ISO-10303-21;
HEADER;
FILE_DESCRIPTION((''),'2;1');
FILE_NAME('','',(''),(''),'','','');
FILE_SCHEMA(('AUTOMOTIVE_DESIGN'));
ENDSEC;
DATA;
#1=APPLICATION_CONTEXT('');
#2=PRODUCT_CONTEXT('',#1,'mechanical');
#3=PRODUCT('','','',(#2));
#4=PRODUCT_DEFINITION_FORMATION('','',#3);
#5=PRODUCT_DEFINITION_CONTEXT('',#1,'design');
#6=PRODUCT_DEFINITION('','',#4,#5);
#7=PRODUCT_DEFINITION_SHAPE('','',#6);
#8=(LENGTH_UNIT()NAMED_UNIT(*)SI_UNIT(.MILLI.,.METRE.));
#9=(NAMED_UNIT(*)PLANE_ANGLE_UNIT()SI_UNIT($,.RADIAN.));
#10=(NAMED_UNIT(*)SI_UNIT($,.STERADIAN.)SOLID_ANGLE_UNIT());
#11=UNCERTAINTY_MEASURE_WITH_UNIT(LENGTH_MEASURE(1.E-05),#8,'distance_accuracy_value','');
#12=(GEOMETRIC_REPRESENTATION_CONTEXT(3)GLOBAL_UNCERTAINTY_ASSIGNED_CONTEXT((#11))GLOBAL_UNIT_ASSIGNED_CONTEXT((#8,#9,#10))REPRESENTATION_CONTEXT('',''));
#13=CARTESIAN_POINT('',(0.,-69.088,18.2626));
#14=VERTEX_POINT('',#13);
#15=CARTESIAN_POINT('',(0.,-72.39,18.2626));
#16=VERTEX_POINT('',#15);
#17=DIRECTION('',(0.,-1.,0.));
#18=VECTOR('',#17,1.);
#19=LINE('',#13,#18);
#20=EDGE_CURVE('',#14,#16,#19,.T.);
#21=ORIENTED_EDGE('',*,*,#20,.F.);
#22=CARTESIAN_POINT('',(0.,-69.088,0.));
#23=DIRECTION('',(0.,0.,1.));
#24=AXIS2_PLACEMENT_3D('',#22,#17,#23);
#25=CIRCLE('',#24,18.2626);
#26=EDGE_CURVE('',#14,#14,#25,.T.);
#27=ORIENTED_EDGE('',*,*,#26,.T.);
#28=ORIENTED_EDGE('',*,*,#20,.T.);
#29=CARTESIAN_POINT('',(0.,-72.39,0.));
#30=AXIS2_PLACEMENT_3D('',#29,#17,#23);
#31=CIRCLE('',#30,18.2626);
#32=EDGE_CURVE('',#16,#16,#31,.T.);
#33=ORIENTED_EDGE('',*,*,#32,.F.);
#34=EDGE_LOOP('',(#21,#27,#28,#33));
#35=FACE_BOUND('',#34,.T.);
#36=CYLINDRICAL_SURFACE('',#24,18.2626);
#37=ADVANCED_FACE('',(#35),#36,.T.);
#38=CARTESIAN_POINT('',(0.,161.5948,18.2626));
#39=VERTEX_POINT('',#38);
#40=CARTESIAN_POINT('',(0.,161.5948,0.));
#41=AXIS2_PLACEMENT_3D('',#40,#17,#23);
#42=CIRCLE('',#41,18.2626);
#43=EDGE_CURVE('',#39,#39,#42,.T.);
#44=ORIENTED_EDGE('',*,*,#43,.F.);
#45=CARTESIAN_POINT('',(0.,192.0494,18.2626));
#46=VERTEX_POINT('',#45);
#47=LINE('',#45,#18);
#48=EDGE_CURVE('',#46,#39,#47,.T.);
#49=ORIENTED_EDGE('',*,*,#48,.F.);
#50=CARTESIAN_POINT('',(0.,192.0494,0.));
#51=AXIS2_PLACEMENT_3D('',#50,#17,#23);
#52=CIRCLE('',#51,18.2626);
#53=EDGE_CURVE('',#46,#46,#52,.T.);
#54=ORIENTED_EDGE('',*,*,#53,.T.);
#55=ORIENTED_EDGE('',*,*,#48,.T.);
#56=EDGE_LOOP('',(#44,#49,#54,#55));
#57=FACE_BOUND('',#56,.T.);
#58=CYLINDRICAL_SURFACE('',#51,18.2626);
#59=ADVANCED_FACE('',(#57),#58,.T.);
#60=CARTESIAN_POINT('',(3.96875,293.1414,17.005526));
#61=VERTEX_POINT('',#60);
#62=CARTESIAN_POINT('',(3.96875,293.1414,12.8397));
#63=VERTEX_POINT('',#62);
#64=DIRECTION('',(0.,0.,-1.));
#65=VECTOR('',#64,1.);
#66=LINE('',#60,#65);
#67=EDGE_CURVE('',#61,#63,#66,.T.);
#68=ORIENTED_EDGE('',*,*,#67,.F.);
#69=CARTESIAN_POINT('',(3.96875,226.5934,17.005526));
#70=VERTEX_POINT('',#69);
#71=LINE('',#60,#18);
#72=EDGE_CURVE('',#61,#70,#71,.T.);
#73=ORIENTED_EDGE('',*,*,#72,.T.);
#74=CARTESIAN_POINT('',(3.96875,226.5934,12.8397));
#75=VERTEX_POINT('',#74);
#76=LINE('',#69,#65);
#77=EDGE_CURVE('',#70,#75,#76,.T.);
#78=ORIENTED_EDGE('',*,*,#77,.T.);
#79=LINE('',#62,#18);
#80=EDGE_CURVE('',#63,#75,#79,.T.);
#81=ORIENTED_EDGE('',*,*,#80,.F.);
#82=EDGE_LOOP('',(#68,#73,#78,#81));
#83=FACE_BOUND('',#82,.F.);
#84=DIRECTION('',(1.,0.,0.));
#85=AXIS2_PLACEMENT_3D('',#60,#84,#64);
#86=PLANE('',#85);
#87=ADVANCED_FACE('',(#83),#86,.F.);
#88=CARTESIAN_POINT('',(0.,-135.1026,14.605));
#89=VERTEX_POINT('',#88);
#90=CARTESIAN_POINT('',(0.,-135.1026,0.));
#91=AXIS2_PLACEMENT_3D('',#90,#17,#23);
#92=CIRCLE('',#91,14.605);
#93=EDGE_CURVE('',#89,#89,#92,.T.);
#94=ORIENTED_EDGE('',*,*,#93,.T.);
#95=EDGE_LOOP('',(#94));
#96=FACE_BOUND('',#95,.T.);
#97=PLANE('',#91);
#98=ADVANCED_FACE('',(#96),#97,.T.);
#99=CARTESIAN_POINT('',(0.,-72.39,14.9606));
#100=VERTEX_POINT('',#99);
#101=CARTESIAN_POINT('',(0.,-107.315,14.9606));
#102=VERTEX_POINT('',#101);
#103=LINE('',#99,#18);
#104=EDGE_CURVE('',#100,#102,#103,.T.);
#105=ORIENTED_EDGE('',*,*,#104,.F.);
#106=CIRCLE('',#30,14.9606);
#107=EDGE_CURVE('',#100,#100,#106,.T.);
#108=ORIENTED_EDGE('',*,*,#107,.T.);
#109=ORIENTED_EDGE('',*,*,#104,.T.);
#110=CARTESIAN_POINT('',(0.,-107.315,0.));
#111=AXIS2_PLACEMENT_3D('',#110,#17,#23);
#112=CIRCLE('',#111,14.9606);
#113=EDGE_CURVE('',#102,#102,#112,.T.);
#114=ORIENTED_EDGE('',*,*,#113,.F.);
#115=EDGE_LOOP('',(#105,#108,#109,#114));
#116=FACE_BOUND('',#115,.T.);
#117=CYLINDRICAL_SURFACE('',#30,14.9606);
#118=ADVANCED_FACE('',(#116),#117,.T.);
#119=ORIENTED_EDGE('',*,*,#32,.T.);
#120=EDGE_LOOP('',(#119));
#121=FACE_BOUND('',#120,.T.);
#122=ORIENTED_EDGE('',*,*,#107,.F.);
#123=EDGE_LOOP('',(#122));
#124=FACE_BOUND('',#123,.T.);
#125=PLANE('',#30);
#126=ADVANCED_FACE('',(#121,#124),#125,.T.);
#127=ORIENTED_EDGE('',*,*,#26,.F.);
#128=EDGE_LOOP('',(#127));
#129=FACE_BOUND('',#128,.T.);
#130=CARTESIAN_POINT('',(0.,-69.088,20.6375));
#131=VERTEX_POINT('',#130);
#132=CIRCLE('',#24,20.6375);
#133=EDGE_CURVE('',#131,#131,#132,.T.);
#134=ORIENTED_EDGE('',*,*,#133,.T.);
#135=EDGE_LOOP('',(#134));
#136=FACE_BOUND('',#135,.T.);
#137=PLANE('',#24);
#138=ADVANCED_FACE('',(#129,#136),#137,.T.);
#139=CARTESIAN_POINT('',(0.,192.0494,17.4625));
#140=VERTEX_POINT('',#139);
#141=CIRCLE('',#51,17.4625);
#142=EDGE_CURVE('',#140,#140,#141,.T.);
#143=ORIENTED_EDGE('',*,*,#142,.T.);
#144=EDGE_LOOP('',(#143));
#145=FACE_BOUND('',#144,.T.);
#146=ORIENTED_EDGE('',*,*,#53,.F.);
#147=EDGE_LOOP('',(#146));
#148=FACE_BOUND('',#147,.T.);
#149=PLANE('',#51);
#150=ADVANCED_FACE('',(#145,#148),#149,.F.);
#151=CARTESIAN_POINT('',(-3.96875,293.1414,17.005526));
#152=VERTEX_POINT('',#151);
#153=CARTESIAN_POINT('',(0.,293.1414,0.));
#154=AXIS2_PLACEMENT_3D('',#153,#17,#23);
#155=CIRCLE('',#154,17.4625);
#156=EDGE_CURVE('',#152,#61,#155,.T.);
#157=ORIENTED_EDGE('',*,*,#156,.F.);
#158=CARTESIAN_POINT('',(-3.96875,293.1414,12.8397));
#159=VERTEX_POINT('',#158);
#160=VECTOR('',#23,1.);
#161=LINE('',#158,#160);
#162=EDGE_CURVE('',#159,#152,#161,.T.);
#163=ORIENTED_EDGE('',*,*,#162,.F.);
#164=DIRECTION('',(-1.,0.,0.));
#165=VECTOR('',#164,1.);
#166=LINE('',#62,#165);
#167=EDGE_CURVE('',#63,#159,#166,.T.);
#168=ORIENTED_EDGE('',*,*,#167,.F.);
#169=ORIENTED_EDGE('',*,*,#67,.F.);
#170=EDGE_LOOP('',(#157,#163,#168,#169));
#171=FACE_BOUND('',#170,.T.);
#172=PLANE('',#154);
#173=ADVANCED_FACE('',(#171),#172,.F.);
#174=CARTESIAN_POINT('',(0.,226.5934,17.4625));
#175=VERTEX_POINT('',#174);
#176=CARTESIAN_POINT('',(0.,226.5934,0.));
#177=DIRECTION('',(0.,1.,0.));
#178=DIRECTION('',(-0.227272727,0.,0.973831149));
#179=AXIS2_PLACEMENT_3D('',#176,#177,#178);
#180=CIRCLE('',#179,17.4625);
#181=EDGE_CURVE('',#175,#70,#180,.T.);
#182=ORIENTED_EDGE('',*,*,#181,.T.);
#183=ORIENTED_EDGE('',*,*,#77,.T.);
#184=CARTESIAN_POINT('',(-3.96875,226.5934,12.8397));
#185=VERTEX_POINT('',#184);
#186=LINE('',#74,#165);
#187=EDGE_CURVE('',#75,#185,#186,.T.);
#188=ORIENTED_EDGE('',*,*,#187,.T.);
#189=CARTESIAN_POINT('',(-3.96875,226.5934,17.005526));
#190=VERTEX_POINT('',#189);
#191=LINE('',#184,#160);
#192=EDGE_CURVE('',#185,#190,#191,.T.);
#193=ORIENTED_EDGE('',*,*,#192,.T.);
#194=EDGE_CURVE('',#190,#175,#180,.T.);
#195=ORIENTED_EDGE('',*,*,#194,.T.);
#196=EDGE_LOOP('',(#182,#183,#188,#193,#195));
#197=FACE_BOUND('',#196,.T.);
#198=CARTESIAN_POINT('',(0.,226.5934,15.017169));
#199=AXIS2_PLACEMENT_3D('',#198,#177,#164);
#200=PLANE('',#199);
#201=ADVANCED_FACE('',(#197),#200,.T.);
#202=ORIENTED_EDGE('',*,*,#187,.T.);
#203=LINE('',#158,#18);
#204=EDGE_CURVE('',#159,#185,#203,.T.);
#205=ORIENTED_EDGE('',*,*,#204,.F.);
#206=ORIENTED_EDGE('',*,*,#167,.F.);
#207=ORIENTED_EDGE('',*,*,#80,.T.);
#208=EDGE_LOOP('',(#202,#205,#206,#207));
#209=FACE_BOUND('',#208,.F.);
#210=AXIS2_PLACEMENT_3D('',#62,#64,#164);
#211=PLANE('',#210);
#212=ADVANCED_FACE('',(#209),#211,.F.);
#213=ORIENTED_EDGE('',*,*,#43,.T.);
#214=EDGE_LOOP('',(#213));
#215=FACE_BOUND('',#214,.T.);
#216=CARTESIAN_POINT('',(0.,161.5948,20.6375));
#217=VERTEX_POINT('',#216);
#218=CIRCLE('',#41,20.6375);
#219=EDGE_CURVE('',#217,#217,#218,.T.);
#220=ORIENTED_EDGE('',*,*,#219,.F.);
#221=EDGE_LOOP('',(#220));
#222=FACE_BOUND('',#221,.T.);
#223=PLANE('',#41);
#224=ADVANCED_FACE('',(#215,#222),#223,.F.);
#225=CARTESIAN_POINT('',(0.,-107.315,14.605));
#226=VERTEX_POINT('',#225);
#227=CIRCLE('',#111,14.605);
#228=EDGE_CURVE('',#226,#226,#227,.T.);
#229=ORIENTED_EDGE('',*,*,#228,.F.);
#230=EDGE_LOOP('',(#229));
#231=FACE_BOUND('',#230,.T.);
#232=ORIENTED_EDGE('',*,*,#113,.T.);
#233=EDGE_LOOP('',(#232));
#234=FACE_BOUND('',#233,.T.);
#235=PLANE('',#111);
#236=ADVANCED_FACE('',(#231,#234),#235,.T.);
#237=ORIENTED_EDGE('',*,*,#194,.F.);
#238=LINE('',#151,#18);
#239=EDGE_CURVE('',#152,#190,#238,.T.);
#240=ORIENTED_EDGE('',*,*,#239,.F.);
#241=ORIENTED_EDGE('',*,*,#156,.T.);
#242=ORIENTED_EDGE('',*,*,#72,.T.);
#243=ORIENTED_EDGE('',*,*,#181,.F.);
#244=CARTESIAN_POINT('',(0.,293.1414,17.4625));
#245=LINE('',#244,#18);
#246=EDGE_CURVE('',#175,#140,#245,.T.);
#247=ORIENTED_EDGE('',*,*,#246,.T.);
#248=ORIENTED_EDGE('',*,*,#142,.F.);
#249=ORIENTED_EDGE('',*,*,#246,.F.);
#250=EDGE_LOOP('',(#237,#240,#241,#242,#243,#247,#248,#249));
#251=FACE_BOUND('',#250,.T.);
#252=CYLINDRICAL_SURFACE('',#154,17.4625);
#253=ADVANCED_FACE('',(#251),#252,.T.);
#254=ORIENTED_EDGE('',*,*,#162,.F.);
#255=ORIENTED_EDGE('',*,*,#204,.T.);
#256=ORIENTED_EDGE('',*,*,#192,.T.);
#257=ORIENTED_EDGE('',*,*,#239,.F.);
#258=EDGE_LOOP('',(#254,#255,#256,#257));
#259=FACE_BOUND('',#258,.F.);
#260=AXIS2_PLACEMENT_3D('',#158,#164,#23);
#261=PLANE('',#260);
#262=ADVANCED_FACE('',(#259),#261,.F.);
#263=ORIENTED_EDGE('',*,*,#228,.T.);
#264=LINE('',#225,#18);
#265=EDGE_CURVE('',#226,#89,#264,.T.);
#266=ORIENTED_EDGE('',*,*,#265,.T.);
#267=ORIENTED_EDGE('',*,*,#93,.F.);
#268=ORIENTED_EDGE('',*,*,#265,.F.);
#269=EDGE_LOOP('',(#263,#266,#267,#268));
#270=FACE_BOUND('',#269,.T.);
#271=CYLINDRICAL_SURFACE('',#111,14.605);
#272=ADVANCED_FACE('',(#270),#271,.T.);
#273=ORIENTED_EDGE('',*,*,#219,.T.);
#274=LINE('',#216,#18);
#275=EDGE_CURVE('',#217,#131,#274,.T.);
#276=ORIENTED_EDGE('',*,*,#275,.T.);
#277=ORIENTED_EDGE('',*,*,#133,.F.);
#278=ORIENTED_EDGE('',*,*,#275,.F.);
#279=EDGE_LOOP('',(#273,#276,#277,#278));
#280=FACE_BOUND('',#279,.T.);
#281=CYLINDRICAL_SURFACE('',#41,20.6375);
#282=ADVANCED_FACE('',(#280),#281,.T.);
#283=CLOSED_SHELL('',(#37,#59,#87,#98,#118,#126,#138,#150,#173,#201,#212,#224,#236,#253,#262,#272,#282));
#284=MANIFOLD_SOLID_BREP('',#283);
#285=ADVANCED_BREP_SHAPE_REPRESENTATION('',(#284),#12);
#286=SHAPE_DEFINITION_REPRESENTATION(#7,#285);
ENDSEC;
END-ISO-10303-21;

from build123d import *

# Parameters (mm, degrees)
F3_DEPTH = 66.548


# Not quite as in the source:
# - a feature names something its author has since deleted; it is built from what else it names


with BuildPart() as f1:
    # F0 (on Right) → F1 (revolve)
    with BuildSketch(Plane.YZ):
        Polygon((-107.315, 14.605), (-135.1026, 14.605), (-135.1026, 0), (0, 0), (293.1414, 0), (293.1414, 17.4625), (192.0494, 17.4625), (192.0494, 18.2626), (161.5948, 18.2626), (161.5948, 20.6375), (-69.088, 20.6375), (-69.088, 18.2626), (-72.39, 18.2626), (-72.39, 14.9606), (-107.315, 14.9606), align=None)
    revolve(axis=Axis((0, 146.5707, 0), (0, -1, 0)))

    # F2 (on face) → F3 (cut)
    with BuildSketch(Plane(origin=(0, 293.1414, 0), x_dir=(-1, 0, 0), z_dir=(0, 1, 0))):
        with BuildLine():
            Line((-3.96875, 17.0055264455), (-3.96875, 12.8397))
            Line((-3.96875, 12.8397), (3.96875, 12.8397))
            Line((3.96875, 12.8397), (3.96875, 17.0055264455))
            ThreePointArc((3.96875, 17.0055264455), (0, 17.4625), (-3.96875, 17.0055264455))
        make_face()
    extrude(amount=-F3_DEPTH, mode=Mode.SUBTRACT)


solid = f1.part
